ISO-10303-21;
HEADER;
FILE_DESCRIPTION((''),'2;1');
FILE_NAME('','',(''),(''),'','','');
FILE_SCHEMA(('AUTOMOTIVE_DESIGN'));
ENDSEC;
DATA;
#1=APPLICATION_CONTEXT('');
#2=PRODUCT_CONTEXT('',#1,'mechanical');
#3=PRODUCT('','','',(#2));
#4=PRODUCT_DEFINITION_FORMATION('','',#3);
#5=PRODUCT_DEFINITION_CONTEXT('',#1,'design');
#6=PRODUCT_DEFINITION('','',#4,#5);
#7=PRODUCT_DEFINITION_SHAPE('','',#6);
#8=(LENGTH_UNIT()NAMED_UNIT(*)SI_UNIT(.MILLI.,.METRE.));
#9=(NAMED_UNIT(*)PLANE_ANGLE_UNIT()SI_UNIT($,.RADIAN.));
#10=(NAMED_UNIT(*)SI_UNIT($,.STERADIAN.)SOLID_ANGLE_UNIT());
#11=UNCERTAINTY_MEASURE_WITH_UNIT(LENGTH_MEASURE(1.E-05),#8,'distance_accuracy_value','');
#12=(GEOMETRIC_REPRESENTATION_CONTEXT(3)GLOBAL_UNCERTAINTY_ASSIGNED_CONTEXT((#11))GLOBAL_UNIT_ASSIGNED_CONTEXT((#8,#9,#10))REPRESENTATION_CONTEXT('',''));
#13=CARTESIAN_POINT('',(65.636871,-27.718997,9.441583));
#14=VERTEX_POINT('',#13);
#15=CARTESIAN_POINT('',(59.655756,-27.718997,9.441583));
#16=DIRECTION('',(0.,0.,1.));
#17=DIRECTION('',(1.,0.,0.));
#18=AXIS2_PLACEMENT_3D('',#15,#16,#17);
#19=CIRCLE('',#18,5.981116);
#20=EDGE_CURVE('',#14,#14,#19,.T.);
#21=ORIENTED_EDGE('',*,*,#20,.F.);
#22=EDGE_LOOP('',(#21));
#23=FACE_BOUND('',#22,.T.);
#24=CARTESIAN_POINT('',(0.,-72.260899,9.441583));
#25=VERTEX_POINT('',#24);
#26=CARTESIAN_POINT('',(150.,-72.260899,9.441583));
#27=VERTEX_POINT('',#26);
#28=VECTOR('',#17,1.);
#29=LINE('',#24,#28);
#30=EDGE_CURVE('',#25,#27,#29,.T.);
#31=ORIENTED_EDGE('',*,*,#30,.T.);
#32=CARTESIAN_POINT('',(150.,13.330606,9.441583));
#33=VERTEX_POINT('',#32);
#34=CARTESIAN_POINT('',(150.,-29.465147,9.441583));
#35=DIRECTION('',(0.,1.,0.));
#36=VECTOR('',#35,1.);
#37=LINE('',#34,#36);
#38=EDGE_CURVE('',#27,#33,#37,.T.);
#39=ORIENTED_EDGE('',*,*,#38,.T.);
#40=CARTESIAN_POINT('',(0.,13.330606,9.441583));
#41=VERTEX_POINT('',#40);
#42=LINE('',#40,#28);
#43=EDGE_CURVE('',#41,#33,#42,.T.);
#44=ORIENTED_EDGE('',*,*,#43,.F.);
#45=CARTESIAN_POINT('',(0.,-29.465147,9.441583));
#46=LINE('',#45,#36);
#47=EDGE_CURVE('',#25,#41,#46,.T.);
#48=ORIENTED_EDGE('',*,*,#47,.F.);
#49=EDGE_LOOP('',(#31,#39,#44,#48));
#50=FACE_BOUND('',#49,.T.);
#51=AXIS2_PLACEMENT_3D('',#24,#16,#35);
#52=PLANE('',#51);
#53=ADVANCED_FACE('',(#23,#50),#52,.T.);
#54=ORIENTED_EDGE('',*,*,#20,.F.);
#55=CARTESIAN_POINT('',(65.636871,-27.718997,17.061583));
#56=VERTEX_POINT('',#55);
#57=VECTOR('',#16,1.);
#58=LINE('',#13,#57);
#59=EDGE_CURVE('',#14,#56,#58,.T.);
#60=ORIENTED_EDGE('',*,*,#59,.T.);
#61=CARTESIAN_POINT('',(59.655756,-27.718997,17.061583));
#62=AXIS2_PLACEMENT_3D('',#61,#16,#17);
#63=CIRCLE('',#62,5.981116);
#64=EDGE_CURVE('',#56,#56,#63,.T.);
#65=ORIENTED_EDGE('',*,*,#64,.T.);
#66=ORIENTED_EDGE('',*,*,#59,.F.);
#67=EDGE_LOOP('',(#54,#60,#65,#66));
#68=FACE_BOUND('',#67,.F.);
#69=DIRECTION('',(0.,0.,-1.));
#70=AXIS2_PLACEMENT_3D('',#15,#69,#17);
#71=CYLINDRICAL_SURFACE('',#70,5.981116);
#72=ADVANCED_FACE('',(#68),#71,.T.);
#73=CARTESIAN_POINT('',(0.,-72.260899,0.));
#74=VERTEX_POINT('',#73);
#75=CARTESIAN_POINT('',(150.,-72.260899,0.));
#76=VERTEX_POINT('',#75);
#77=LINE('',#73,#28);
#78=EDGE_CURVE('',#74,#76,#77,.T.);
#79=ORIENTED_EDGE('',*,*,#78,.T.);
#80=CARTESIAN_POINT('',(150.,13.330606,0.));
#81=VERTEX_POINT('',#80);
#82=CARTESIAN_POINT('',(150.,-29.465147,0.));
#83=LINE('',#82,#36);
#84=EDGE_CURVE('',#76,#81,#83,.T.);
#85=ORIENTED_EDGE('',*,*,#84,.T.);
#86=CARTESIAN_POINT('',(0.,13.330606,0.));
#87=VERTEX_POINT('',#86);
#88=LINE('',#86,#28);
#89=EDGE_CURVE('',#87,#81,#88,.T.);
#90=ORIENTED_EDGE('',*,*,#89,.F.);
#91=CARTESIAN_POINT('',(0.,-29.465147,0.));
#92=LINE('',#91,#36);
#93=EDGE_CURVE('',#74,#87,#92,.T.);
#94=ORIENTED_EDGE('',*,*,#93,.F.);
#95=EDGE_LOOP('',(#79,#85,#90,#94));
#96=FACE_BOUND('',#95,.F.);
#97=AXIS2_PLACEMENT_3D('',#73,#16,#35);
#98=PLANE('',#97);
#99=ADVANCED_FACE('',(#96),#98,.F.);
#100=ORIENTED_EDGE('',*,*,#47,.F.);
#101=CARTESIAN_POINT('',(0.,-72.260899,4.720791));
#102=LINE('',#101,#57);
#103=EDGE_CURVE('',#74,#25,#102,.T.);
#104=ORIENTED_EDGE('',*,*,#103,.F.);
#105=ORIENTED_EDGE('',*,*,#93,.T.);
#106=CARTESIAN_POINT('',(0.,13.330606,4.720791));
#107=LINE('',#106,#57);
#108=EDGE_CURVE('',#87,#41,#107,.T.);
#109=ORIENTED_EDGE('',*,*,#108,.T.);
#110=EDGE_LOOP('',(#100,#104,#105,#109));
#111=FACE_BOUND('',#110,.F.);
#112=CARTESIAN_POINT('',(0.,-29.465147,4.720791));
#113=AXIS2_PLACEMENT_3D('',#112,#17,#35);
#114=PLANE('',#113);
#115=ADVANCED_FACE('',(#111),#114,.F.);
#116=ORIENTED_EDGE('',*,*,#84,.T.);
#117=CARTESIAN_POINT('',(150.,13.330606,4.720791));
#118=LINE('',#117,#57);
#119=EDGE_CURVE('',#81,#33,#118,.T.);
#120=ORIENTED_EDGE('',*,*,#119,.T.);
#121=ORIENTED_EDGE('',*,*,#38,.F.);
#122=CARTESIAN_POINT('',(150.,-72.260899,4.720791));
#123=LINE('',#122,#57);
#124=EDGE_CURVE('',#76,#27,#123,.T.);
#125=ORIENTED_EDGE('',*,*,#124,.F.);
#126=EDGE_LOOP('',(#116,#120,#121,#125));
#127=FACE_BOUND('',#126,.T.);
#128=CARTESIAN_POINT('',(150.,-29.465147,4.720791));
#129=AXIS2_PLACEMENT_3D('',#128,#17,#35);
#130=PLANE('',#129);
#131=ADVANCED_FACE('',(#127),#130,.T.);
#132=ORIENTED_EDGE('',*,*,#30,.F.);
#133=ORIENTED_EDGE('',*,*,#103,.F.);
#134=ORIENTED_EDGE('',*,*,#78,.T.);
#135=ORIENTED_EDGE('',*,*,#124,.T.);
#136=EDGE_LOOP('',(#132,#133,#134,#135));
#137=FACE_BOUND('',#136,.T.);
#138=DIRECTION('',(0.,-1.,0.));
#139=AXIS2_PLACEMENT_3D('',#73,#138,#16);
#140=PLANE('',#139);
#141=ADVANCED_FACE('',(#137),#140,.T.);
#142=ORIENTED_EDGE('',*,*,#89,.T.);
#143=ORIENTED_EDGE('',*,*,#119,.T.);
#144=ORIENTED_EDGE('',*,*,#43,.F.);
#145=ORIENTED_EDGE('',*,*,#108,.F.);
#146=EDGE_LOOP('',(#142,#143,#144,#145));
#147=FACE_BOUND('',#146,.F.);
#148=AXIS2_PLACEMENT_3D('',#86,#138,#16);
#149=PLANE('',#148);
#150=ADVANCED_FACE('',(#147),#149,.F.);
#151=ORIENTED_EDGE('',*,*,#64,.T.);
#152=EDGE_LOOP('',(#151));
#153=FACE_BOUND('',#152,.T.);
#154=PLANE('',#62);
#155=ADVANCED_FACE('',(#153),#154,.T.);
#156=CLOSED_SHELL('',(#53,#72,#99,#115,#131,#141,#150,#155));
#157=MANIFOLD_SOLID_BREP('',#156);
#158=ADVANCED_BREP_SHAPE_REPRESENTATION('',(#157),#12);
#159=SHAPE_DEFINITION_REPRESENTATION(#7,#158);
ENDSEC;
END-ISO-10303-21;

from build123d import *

# Parameters (mm, degrees)
F0_W     = 85.5915052816
F0_H     = 9.4415829517
F1_DEPTH = 150
F2_DEPTH = 150
F4_R     = 5.981115506
F5_DEPTH = 7.62


# Not quite as in the source:
# - a feature of the source that left no trace in its solid (it failed there, or was rolled back) is left out


with BuildPart() as f1:
    # F0 (on Right) → F1 (new body)
    with BuildSketch(Plane.YZ):
        with Locations((-29.4651468284, 4.7207914758)):
            Rectangle(F0_W, F0_H)
    extrude(amount=F1_DEPTH)

    # F2 (cut): a face of the model
    f2_faces = [f1.faces().sort_by_distance(p)[0] for p in [
        (75, -72.2608994693, 4.7207914758),
    ]]
    extrude(f2_faces, amount=F2_DEPTH, mode=Mode.SUBTRACT)

    # F4 (on face) → F5 (join)
    with BuildSketch(Plane.XY.offset(9.4415829517)):
        with Locations((59.6557557583, -27.7189966291)):
            Circle(F4_R)
    extrude(amount=F5_DEPTH)


solid = f1.part
